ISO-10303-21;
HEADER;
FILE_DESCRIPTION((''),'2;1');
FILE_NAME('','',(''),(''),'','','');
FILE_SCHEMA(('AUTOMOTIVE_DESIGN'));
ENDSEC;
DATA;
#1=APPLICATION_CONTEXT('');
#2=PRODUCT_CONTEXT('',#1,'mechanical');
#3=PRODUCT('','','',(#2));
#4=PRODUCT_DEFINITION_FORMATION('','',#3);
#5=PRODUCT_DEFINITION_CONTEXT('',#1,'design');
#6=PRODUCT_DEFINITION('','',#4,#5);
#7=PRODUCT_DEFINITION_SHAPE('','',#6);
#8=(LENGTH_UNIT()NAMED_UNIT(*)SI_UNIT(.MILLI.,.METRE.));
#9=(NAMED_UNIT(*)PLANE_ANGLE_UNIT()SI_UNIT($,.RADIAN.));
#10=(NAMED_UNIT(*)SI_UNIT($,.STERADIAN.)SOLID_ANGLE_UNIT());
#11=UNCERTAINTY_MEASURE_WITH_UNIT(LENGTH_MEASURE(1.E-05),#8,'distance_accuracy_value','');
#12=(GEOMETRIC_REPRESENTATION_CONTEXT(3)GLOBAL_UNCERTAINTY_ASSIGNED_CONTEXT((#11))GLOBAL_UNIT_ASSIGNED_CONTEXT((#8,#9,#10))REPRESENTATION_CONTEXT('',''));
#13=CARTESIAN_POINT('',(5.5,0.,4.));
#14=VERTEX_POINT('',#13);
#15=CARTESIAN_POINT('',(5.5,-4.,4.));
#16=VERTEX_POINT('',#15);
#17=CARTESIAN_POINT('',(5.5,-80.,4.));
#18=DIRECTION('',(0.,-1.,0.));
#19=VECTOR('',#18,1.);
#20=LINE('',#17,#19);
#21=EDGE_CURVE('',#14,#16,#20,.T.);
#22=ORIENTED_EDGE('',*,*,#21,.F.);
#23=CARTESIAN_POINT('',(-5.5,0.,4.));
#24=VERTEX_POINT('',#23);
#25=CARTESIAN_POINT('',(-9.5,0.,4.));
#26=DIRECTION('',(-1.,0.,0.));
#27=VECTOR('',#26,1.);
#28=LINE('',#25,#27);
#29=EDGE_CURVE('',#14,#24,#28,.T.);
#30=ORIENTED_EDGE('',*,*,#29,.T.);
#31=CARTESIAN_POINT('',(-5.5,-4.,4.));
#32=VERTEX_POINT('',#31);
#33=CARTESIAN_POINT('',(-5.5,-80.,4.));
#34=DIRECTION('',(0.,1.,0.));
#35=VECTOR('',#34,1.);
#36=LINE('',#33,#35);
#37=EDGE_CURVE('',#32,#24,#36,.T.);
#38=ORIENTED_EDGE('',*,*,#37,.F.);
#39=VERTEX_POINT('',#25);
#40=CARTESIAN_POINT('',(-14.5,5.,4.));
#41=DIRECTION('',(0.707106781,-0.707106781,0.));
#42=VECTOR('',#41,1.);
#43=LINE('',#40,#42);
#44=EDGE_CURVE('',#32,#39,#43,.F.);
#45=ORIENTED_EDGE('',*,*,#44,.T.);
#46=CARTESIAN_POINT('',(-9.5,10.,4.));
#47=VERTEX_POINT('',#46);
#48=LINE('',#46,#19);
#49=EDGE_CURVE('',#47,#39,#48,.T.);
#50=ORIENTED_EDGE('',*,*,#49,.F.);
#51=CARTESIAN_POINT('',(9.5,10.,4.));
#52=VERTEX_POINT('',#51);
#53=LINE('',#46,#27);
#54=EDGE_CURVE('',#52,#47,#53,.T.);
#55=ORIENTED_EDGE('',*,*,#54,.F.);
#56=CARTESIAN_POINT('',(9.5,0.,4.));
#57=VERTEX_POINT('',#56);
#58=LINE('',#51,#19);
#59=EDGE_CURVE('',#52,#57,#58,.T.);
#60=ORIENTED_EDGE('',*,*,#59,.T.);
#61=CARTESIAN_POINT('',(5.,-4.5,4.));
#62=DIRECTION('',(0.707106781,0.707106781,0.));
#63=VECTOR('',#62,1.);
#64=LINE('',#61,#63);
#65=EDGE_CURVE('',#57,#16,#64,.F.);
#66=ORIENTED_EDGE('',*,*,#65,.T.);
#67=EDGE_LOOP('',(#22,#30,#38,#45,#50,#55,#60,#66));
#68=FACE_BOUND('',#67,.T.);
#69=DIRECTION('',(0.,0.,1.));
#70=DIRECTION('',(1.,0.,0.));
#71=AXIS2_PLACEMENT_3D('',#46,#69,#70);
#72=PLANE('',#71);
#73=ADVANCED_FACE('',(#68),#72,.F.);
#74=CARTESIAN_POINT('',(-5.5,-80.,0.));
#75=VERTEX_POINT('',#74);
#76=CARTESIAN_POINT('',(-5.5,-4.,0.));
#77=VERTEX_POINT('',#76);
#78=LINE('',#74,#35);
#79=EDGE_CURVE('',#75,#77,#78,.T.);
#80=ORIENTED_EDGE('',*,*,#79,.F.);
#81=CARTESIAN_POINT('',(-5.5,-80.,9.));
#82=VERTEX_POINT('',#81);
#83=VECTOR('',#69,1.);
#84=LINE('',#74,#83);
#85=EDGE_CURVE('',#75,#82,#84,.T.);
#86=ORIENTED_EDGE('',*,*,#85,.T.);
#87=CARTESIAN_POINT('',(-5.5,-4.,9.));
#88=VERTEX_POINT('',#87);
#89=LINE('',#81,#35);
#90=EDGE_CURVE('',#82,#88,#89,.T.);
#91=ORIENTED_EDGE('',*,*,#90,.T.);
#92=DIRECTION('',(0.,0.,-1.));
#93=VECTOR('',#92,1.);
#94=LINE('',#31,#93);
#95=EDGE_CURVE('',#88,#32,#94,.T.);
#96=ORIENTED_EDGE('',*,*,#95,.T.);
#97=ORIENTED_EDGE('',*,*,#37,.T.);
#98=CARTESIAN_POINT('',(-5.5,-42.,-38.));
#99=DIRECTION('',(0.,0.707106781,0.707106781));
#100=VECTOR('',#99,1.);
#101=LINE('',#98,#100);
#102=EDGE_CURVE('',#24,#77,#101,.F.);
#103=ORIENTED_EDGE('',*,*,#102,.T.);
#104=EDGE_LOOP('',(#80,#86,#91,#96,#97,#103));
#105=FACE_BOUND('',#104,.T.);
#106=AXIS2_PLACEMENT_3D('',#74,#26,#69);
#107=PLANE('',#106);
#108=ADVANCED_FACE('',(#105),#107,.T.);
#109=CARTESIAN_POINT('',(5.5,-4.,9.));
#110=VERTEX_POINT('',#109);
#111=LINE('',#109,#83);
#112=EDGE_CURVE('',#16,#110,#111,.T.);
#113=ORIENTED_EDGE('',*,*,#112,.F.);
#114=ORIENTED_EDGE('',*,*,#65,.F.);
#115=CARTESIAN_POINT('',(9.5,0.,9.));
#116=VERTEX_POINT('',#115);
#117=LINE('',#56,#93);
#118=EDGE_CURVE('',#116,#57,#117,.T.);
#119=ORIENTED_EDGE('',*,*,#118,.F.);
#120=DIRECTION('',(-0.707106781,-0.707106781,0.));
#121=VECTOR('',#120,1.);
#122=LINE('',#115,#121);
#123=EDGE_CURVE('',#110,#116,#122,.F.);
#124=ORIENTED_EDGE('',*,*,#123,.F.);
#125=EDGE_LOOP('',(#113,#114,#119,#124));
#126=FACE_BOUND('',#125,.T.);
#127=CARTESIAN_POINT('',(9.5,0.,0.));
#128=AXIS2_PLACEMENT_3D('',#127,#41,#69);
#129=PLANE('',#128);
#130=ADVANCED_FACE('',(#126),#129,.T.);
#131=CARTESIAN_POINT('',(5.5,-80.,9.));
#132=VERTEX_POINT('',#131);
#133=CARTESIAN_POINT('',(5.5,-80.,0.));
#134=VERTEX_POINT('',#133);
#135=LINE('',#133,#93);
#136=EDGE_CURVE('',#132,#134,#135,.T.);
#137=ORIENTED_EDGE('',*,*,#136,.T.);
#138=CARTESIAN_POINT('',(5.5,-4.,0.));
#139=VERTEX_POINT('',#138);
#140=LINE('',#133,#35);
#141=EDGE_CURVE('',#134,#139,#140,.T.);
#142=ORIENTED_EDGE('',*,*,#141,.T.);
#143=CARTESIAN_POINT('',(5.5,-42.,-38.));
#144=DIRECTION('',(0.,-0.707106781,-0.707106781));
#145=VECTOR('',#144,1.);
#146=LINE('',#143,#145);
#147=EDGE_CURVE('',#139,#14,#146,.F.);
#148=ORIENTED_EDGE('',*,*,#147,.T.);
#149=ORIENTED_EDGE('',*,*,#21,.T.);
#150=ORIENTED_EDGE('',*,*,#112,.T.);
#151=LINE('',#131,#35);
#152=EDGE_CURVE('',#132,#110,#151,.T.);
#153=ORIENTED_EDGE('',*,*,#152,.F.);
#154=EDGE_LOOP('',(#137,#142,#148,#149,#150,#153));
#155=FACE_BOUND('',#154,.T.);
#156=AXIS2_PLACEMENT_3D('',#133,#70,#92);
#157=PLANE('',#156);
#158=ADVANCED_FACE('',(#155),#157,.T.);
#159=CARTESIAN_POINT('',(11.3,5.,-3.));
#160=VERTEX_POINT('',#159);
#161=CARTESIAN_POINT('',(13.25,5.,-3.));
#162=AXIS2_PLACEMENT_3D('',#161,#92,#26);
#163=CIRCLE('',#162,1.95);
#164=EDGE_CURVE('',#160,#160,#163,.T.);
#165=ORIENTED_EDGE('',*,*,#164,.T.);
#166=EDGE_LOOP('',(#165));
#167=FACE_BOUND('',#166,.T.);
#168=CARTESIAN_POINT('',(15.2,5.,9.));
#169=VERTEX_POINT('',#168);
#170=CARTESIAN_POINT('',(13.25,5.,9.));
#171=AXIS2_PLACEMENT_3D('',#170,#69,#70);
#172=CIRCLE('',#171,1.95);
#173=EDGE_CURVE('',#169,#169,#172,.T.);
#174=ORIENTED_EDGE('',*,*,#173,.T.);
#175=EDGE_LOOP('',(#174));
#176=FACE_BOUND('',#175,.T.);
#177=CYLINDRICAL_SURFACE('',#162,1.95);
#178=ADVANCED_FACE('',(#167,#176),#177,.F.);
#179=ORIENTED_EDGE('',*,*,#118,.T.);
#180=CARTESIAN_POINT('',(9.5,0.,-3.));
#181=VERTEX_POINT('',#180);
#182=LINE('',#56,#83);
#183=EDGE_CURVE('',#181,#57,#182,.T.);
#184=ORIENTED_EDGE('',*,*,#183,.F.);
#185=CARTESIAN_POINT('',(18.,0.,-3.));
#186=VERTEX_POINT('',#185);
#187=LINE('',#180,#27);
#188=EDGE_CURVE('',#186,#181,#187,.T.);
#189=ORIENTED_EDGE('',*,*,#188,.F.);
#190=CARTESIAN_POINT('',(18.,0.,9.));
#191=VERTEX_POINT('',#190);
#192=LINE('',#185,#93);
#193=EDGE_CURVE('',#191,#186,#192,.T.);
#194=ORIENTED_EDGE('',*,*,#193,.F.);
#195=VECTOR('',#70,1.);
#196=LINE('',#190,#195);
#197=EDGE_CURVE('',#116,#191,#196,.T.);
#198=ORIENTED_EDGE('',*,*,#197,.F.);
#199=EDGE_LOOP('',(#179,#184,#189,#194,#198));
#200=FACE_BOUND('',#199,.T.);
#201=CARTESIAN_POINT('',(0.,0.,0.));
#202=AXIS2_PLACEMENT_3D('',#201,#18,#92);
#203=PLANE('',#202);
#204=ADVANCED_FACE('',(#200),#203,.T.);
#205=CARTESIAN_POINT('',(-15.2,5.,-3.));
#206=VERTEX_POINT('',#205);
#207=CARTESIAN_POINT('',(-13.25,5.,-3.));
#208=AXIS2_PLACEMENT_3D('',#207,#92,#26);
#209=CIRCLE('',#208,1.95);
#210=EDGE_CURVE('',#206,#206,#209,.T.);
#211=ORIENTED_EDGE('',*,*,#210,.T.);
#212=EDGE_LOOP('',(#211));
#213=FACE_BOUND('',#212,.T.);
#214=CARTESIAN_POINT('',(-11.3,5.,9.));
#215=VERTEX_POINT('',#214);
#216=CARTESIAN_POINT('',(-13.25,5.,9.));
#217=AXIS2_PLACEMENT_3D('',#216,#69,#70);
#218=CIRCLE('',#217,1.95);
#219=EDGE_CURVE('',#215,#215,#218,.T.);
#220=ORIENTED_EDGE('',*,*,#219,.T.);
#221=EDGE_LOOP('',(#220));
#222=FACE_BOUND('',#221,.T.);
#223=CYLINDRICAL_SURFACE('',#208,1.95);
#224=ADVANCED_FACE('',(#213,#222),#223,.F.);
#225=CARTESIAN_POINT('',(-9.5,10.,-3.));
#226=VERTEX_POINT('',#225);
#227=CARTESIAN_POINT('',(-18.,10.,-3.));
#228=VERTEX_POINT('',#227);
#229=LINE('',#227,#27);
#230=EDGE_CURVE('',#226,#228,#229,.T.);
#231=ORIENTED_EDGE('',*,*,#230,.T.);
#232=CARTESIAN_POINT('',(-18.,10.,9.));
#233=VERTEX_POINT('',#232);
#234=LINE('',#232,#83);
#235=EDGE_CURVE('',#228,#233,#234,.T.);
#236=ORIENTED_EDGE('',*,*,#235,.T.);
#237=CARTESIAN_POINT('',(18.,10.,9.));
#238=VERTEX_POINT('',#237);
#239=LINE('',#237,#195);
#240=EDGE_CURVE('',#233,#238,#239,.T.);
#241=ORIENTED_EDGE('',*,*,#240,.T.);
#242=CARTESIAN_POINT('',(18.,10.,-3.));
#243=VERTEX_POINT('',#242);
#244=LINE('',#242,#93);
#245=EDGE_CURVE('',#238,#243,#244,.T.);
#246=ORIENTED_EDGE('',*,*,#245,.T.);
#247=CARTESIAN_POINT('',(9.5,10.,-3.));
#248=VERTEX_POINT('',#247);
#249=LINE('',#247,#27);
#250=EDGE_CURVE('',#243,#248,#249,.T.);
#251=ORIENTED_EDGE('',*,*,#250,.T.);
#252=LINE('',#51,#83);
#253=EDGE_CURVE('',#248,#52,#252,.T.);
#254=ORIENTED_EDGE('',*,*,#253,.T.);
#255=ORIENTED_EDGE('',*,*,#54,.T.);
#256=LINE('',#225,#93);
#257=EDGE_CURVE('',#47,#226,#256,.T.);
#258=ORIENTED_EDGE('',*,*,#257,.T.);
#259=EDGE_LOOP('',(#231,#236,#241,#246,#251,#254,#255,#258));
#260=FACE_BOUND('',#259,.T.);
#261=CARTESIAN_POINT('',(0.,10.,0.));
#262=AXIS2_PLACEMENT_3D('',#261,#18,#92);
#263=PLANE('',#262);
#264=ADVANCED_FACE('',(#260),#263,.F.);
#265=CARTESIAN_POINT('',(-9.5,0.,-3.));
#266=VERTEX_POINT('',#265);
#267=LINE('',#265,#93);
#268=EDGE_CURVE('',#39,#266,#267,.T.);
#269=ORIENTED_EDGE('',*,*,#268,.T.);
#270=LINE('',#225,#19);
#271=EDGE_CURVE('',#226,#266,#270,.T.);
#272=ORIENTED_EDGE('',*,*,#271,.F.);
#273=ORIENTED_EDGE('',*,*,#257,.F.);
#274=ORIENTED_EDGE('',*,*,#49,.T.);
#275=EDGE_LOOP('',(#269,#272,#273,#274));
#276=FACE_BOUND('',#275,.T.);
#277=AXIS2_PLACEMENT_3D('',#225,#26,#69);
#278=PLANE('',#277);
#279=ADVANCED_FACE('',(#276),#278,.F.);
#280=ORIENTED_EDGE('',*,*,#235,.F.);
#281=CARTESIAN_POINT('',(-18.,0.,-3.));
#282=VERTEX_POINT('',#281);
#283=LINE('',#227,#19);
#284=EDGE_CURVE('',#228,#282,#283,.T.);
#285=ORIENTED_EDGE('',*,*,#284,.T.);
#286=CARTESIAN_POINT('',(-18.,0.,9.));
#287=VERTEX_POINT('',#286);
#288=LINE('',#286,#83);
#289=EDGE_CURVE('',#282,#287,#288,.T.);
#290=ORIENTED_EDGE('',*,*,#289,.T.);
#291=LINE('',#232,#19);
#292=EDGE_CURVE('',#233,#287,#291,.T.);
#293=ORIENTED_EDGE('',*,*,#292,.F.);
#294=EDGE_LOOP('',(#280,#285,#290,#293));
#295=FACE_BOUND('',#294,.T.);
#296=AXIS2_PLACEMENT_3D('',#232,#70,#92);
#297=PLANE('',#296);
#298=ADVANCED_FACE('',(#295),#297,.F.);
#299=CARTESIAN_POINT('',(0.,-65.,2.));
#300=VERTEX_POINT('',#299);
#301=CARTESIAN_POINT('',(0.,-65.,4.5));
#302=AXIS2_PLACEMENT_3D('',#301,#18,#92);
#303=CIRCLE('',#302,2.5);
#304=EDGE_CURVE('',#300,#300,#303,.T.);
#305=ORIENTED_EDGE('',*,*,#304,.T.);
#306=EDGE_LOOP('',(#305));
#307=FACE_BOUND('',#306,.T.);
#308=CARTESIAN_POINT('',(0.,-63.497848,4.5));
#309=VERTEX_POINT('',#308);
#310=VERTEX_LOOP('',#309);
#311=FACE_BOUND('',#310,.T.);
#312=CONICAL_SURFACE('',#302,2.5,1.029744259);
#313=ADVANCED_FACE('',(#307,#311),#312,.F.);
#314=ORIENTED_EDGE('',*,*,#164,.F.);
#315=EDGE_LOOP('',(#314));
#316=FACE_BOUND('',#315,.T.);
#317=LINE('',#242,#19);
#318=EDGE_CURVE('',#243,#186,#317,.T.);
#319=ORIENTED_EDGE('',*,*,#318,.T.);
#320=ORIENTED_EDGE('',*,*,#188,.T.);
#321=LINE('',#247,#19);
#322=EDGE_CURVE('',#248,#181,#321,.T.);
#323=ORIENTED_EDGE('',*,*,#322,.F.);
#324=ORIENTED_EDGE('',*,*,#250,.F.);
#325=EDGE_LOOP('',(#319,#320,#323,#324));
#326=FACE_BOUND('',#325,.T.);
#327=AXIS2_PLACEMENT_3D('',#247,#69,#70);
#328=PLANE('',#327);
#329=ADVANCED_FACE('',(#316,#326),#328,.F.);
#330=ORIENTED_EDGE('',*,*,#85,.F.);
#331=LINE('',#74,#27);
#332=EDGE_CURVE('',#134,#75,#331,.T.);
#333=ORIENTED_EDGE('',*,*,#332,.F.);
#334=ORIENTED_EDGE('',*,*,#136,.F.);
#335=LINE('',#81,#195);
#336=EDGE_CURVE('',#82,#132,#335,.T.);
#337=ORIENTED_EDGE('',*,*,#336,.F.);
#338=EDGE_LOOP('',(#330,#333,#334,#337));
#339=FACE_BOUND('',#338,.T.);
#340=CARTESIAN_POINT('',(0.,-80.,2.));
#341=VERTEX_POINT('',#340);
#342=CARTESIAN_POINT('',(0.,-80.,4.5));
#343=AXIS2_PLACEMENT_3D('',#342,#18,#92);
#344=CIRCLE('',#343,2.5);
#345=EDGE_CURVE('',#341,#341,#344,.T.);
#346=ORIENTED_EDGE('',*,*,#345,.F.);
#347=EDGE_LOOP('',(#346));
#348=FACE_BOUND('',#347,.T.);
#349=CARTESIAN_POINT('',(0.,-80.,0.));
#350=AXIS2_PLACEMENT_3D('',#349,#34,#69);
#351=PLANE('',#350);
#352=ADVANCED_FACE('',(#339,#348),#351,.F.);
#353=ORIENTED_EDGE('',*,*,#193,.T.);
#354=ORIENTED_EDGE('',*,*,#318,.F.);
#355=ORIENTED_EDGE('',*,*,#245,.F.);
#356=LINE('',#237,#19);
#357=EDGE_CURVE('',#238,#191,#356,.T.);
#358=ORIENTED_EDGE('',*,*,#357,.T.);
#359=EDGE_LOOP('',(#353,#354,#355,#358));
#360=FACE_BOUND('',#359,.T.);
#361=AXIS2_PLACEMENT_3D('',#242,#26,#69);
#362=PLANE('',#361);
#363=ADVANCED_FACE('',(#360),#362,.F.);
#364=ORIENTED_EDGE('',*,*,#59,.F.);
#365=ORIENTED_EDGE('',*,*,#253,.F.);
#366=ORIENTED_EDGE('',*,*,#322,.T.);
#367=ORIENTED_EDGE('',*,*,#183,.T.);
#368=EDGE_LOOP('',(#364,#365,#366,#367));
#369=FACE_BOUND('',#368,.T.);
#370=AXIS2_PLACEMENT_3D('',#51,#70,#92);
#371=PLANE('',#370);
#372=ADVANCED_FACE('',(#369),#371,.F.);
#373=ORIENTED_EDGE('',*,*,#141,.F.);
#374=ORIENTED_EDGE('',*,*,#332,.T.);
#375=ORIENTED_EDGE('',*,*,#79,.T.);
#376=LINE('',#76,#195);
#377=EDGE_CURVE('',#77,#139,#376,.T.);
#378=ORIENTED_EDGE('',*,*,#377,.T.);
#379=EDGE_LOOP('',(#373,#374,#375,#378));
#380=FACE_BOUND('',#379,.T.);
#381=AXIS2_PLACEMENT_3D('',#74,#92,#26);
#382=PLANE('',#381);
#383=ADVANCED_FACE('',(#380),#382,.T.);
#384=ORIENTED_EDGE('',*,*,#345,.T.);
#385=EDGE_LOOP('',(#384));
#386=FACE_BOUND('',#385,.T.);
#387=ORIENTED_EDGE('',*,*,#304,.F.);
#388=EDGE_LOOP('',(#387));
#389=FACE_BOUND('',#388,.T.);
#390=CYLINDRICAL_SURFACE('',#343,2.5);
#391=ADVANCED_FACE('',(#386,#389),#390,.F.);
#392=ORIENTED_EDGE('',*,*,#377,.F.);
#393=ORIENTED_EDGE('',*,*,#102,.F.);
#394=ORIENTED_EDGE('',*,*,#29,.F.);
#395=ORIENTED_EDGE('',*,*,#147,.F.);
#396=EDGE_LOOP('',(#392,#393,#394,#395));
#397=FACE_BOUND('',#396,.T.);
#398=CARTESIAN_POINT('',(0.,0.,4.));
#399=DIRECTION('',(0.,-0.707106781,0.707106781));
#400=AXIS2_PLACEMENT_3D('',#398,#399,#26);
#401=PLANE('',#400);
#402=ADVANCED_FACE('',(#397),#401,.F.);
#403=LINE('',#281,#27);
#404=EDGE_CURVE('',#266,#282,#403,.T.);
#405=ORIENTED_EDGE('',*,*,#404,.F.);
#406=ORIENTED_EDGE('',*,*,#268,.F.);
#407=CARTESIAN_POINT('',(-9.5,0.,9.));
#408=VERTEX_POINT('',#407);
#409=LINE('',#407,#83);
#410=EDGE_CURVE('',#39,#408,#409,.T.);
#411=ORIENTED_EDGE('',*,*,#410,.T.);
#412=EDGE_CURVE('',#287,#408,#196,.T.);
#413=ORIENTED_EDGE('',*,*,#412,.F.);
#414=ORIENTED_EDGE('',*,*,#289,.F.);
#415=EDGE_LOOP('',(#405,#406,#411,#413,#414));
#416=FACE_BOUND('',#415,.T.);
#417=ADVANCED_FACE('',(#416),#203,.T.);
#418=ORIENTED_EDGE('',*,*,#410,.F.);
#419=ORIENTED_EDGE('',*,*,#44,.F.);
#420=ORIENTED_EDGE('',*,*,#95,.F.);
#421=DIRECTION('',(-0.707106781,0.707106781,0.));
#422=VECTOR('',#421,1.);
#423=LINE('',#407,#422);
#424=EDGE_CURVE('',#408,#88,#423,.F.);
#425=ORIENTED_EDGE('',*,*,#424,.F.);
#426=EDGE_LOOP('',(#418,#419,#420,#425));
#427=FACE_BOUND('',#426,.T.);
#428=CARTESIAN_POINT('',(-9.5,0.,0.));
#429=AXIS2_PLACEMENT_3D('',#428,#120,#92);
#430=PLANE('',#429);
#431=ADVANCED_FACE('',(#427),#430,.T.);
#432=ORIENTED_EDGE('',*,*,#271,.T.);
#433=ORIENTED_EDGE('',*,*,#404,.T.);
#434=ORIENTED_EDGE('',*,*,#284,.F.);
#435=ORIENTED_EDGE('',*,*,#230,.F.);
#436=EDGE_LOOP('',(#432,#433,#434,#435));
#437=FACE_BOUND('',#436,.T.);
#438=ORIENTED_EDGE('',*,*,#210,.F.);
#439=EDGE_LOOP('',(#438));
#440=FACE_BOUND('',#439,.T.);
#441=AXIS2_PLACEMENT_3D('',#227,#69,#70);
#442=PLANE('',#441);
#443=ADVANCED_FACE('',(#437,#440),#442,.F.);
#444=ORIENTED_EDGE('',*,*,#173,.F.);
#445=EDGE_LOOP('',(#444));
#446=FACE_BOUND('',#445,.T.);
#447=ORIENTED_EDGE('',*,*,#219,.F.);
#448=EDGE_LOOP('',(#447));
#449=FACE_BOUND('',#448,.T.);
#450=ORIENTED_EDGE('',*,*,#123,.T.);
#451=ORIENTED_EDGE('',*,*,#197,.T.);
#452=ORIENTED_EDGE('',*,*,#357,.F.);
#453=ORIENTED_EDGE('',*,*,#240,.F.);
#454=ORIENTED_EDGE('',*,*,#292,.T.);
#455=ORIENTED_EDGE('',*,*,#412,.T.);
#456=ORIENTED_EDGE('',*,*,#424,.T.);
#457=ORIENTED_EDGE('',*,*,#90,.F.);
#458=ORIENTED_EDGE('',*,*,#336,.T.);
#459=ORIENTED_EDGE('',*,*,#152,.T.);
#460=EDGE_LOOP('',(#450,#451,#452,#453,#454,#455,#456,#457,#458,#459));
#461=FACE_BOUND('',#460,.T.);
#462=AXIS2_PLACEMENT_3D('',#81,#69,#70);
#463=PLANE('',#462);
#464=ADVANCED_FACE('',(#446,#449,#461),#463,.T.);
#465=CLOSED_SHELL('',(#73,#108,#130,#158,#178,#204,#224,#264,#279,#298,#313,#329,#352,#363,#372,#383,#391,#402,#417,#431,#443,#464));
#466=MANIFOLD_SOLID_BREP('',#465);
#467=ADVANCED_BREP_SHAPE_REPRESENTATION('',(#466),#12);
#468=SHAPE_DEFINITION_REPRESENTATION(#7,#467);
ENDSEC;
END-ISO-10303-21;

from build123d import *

# Parameters (mm, degrees)
SKETCH1_W                  = 11
SKETCH1_H                  = 9
BOSS_EXTRUDE1_DEPTH        = 80
BOSS_EXTRUDE2_DEPTH        = 10
F_3_9_3_9_DIAMETER_HOLE1_D = 3.9
CHAMFER1_SIZE              = 4
M6X1_0_TAPPED_HOLE1_D      = 5
M6X1_0_TAPPED_HOLE1_DEPTH  = 15
M6X1_0_TAPPED_HOLE1_TIP    = 1.502151548


with BuildPart() as part:
    # Sketch1 → Boss-Extrude1 (new body)
    with BuildSketch(Plane(origin=(0, 0, 0), x_dir=(1, 0, 0), z_dir=(0, 1, 0))):
        with Locations((0, -4.5)):
            Rectangle(SKETCH1_W, SKETCH1_H)
    extrude(amount=-BOSS_EXTRUDE1_DEPTH)

    # Sketch2 → Boss-Extrude2 (add)
    with BuildSketch(Plane(origin=(0, 0, 0), x_dir=(1, 0, 0), z_dir=(0, 1, 0))):
        Polygon((-9.5, 3), (-9.5, -4), (9.5, -4), (9.5, 3), (18, 3), (18, -9), (-18, -9), (-18, 3), align=None)
    extrude(amount=BOSS_EXTRUDE2_DEPTH)

    # Ø3.9 (3.9) Diameter Hole1 (through all)
    with Locations(Plane(origin=(0, 0, -3), x_dir=(-1, 0, 0), z_dir=(0, 0, -1))):
        with Locations((-13.25, 5), (13.25, 5)):
            Hole(F_3_9_3_9_DIAMETER_HOLE1_D / 2)

    # Chamfer1
    chamfer1_edges = [part.edges().sort_by_distance(p)[0] for p in [
        (-5.5, 0, 6.5),
        (5.5, 0, 6.5),
    ]]
    chamfer(chamfer1_edges, length=CHAMFER1_SIZE)
    chamfer1_2_edges = [part.edges().sort_by_distance(p)[0] for p in [
        (0, 0, 0),
    ]]
    chamfer(chamfer1_2_edges, length=CHAMFER1_SIZE - 0.0001)  # a hair under: the kernel refuses the full size

    # M6x1.0 Tapped Hole1
    with Locations(Plane(origin=(0, -80, 0), x_dir=(-1, 0, 0), z_dir=(0, -1, 0))):
        with Locations((0, -4.5)):
            Hole(M6X1_0_TAPPED_HOLE1_D / 2, depth=M6X1_0_TAPPED_HOLE1_DEPTH)
            with Locations((0, 0, -(M6X1_0_TAPPED_HOLE1_DEPTH + M6X1_0_TAPPED_HOLE1_TIP / 2))):  # 118° drill point
                Cone(0, M6X1_0_TAPPED_HOLE1_D / 2, M6X1_0_TAPPED_HOLE1_TIP, mode=Mode.SUBTRACT)


solid = part.part
